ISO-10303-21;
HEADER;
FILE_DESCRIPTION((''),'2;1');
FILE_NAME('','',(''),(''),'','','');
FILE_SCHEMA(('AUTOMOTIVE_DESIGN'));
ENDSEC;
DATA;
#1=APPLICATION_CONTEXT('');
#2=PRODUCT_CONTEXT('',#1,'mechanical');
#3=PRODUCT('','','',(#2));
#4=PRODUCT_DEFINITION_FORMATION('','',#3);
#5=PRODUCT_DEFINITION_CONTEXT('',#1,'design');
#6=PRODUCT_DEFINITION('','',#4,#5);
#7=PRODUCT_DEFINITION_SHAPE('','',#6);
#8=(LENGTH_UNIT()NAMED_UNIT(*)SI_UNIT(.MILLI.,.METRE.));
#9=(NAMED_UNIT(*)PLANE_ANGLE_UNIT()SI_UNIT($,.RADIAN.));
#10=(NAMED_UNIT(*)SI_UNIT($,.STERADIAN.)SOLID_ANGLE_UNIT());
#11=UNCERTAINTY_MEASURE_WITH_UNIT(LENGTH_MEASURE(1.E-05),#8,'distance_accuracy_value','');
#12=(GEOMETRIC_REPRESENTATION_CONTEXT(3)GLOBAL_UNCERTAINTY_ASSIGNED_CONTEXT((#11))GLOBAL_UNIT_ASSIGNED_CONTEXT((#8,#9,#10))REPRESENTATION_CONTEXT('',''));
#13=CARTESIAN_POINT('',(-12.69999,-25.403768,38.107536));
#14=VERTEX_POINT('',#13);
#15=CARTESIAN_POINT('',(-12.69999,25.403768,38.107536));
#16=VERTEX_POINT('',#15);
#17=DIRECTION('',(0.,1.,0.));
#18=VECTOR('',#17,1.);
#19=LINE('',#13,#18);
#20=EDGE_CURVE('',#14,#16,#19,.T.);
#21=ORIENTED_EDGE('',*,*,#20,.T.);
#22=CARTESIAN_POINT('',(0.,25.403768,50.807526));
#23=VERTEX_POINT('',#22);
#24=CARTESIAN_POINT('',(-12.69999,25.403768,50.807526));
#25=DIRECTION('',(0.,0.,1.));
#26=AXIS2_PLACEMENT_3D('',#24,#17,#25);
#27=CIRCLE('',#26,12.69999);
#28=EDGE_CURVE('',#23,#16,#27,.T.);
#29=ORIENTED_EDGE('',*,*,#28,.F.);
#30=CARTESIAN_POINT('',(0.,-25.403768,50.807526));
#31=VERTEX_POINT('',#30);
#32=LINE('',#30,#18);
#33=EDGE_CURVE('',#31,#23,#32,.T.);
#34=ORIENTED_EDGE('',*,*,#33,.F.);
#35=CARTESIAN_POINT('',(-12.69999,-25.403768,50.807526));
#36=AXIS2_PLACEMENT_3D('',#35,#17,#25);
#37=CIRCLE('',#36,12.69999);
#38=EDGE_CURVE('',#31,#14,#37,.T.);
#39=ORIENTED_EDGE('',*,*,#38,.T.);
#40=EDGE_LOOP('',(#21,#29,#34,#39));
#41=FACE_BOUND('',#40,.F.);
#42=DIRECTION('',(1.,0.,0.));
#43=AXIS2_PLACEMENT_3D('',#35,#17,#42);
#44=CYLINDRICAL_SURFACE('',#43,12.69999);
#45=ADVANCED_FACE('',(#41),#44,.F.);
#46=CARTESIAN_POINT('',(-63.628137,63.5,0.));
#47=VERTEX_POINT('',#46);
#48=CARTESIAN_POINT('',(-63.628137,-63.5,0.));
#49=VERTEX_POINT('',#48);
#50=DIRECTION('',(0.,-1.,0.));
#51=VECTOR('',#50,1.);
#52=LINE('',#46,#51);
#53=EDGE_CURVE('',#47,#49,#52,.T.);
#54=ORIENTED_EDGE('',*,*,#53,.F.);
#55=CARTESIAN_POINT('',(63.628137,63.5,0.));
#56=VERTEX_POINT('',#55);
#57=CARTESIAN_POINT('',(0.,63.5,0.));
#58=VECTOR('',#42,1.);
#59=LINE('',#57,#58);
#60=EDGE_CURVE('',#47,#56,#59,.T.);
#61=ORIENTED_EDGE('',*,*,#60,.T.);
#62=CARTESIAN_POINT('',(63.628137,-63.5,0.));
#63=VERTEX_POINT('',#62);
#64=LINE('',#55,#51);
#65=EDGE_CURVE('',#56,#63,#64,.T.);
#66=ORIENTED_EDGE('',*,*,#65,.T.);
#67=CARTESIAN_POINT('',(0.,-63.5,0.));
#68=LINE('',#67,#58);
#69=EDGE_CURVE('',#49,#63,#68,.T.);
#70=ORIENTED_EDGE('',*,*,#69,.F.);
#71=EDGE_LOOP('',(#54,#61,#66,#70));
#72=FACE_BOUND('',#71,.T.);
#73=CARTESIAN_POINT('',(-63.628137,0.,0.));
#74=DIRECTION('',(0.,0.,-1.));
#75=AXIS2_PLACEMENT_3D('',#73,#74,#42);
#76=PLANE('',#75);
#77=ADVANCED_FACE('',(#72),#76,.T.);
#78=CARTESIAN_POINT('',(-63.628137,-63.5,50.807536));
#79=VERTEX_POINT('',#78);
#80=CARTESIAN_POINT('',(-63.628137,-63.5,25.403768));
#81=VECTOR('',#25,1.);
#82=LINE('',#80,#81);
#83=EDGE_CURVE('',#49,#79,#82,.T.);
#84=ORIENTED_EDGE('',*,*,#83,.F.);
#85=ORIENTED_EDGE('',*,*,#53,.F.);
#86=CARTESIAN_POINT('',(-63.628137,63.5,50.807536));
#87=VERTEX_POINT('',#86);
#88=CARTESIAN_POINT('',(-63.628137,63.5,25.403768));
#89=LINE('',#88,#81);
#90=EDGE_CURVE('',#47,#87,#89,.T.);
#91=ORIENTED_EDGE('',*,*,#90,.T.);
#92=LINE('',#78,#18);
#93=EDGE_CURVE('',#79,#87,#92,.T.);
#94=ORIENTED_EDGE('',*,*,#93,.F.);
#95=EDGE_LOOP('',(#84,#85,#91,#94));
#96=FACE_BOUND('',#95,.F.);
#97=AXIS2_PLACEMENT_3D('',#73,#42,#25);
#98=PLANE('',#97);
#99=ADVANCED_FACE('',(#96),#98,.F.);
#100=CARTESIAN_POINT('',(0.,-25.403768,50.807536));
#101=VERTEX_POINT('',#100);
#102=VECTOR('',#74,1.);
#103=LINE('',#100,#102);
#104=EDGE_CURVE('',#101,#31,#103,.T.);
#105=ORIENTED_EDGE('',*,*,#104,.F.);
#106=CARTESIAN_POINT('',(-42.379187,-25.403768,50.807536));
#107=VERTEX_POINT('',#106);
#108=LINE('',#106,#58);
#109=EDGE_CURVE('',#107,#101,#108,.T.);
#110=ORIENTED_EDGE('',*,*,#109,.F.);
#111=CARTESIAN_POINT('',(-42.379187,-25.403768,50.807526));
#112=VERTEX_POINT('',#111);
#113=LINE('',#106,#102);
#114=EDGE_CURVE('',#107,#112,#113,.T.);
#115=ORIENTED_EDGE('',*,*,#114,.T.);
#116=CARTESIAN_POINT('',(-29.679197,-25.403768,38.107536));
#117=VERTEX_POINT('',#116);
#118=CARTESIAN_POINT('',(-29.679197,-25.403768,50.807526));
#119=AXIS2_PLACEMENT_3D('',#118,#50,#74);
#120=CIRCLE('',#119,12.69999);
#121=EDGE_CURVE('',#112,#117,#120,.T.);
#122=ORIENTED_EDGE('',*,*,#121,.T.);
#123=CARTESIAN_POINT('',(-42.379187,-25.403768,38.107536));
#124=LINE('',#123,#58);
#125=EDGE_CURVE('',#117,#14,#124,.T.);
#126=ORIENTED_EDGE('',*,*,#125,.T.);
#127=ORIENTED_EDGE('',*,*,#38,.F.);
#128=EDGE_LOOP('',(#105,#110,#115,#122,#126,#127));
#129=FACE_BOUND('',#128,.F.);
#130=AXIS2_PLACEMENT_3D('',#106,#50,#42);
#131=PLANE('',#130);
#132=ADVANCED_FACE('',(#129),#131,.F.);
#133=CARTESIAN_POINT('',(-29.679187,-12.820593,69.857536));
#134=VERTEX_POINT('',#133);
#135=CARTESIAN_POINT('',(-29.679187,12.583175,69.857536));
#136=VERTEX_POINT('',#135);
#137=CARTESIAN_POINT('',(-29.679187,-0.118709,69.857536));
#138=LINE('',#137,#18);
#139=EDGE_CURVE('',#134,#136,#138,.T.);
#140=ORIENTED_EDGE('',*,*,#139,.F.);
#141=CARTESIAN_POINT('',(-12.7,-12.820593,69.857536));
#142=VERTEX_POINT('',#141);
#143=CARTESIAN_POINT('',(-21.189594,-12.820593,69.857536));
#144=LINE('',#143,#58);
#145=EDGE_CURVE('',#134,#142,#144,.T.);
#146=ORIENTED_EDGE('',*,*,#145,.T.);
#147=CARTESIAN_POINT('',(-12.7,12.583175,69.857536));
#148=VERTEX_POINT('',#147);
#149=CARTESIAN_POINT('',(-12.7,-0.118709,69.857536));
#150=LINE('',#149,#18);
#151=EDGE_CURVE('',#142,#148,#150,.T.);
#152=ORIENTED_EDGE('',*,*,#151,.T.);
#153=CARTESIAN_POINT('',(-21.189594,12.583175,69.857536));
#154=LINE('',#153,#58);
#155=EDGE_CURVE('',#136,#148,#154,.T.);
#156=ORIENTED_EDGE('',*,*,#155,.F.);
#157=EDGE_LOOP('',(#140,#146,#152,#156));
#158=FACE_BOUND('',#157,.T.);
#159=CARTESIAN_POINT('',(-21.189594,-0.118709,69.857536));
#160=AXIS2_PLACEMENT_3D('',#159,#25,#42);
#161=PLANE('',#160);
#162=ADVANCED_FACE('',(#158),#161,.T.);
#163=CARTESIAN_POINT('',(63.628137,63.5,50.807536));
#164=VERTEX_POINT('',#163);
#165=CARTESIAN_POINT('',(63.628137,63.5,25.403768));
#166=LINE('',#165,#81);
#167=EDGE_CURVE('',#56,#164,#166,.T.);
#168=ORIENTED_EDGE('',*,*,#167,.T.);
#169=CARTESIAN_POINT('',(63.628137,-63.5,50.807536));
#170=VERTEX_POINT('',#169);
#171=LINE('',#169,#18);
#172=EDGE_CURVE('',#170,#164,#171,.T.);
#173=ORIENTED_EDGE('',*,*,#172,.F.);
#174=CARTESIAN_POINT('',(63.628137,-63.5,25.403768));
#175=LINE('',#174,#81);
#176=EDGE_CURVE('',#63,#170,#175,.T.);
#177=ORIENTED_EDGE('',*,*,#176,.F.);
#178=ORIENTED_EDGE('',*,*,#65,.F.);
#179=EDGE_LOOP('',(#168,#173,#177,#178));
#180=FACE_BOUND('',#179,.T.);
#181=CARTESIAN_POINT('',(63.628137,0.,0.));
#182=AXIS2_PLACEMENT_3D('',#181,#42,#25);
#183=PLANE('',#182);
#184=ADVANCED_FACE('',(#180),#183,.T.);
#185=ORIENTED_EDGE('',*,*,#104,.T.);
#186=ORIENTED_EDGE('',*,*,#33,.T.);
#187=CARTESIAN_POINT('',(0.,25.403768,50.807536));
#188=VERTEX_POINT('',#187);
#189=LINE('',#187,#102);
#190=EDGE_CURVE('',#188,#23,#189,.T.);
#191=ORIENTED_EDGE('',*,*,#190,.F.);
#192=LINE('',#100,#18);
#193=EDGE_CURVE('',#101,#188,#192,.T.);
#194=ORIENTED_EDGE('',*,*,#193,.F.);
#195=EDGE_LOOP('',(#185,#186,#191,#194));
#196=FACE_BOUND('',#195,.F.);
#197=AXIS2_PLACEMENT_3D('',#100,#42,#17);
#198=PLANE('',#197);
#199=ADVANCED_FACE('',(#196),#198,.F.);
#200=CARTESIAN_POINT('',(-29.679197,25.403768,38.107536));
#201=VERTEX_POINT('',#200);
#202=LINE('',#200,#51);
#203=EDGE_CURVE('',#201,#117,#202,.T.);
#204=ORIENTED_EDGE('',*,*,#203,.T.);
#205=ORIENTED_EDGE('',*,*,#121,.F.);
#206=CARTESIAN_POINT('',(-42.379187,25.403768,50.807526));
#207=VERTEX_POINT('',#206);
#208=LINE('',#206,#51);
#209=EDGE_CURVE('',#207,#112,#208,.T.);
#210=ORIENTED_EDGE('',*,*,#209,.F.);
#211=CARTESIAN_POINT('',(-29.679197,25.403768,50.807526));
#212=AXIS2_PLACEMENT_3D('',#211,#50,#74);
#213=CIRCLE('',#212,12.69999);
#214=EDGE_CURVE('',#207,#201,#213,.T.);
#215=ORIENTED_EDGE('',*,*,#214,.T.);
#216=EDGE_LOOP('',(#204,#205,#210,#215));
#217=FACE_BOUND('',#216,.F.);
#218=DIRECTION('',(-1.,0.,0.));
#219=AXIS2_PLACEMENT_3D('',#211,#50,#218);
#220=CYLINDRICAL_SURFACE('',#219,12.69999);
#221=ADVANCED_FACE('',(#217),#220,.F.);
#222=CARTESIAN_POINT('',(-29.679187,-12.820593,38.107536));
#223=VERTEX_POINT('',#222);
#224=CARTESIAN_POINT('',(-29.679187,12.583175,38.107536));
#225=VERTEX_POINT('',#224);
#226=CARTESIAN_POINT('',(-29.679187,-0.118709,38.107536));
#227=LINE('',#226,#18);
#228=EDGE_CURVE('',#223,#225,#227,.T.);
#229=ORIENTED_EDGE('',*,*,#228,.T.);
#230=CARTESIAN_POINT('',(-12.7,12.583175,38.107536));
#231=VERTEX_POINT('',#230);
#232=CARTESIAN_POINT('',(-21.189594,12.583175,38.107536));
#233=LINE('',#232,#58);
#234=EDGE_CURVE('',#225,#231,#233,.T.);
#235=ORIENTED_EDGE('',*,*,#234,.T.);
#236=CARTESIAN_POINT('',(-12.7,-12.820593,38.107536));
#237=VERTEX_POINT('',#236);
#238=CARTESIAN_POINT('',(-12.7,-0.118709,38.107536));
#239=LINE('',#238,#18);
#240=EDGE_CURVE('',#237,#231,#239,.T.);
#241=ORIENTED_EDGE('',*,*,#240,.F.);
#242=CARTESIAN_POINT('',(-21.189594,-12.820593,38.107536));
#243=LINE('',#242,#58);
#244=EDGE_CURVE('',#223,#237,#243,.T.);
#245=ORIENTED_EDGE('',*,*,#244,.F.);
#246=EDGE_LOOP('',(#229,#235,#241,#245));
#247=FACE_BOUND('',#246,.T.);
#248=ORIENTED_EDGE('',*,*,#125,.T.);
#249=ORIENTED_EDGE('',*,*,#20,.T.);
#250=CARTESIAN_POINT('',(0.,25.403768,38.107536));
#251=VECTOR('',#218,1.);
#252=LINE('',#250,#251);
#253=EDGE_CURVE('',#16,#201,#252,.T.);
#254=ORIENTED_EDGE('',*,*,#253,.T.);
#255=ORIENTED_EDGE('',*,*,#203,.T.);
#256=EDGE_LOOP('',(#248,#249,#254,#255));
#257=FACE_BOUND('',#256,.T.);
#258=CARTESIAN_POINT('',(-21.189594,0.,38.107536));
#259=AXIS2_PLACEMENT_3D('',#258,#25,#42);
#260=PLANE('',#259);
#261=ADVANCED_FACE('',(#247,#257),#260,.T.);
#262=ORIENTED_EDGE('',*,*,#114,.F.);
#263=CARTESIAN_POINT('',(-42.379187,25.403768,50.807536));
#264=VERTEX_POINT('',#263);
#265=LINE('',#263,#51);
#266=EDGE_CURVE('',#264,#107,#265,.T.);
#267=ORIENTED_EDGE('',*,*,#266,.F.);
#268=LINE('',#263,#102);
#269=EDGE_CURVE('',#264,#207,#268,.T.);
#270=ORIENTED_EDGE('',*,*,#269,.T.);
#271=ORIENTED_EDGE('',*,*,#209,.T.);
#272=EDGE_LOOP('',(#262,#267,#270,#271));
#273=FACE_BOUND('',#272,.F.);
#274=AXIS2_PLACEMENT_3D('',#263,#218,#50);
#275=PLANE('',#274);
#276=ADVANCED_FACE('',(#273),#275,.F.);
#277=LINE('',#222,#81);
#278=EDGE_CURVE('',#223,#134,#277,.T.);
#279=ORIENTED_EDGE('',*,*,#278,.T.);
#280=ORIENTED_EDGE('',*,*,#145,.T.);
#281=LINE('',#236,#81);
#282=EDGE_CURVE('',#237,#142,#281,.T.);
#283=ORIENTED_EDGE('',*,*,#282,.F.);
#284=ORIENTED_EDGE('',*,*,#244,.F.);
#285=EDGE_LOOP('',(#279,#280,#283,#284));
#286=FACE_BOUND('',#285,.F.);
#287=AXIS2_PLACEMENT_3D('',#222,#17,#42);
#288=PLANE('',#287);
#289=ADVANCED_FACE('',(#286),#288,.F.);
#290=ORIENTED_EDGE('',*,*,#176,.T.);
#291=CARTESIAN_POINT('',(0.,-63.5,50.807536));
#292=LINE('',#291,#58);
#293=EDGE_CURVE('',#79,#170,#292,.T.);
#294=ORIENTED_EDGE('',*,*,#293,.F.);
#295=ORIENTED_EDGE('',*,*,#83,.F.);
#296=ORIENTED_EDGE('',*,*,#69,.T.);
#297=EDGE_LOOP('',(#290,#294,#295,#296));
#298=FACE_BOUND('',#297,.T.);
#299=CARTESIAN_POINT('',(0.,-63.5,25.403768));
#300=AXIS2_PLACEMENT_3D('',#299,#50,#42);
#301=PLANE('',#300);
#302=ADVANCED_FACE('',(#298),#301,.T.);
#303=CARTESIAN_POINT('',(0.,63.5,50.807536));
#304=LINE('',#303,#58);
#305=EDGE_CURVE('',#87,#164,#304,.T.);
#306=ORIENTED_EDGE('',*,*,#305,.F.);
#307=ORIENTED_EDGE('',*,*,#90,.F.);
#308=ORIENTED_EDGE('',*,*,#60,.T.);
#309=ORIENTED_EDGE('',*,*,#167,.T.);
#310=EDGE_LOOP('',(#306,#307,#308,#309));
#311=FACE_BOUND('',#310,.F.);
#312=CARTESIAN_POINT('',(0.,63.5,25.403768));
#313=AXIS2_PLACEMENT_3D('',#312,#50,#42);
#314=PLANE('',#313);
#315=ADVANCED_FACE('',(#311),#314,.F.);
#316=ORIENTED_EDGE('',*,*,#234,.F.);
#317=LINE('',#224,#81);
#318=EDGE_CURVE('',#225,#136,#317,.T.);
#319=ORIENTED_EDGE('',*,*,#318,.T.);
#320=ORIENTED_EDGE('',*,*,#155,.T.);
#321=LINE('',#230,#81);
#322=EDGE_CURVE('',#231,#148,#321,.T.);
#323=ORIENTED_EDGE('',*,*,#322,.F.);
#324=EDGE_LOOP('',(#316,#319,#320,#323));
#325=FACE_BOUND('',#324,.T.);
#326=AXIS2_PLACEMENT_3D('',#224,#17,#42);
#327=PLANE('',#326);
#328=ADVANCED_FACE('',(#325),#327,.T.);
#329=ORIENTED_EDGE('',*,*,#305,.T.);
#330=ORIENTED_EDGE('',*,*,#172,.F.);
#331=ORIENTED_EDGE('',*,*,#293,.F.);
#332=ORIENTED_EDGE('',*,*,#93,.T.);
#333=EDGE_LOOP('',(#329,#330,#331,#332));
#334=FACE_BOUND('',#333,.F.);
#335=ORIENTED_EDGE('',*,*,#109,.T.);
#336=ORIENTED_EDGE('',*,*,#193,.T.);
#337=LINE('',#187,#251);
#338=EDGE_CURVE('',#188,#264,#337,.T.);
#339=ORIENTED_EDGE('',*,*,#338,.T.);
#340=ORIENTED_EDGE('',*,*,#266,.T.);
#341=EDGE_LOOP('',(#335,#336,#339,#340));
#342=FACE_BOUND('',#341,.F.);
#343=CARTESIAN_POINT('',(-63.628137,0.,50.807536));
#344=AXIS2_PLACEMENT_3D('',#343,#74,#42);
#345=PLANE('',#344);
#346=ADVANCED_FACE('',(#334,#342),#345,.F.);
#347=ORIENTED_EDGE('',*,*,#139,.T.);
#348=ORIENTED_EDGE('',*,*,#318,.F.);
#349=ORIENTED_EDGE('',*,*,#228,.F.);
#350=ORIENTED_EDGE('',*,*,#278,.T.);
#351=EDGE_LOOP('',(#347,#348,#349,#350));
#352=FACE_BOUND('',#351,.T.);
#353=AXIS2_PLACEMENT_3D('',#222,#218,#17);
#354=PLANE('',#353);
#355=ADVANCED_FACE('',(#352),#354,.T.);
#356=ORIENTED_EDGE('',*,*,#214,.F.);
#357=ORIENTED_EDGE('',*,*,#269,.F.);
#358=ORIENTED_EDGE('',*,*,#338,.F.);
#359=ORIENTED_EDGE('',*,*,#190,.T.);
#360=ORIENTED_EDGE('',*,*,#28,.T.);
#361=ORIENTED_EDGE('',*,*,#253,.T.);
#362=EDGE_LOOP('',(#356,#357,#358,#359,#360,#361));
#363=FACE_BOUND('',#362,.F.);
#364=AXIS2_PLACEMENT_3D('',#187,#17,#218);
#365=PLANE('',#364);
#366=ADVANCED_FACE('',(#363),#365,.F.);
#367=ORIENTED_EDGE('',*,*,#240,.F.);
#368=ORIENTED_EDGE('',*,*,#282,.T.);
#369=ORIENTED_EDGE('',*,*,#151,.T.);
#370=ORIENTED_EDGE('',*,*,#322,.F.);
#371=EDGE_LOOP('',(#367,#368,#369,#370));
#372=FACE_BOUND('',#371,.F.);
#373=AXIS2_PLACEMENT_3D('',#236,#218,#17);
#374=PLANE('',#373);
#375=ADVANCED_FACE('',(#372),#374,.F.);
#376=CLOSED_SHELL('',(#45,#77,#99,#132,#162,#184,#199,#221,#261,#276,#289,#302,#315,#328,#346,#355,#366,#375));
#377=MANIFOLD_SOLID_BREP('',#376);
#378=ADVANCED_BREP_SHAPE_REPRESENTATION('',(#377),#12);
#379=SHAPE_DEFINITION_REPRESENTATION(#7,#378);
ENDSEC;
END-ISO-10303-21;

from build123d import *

# Parameters (mm, degrees)
F0_W          = 127.2562742233
F0_H          = 50.8075356483
F1_DEPTH      = 63.5
F1_DEPTH_BACK = 63.5
F3_DEPTH      = 12.7
F4_R          = 12.69999
F5_W          = 16.97918742
F5_H          = 25.4037678242
F6_DEPTH      = 31.75


# Not quite as in the source:
# - a fillet or chamfer is up to 0.001 mm smaller than in the source, because OpenCascade refuses the exact size


with BuildPart() as f1:
    # F0 (on Front) → F1 (new body, two sides)
    with BuildSketch(Plane.XZ) as f1_sk:
        with Locations((0, 25.4037678242)):
            Rectangle(F0_W, F0_H)
    extrude(amount=F1_DEPTH)
    extrude(f1_sk.sketch, amount=-F1_DEPTH_BACK)

    # F2 (on face) → F3 (cut)
    with BuildSketch(Plane.XY.offset(50.8075356483)):
        Polygon((0, -25.4037678242), (0, 0), (0, 25.4037678242), (-42.37918742, 25.4037678242), (-42.37918742, 0), (-42.37918742, -25.4037678242), align=None)
    extrude(amount=-F3_DEPTH, mode=Mode.SUBTRACT)

    # F4 (radius 12.7 in the source; OpenCascade refuses exactly that, so slightly less here)
    f4_edges = [f1.edges().sort_by_distance(p)[0] for p in [
        (-42.379187, 0, 38.107536),
        (0, 0, 38.107536),
    ]]
    fillet(f4_edges, radius=F4_R)

    # F5 (on face) → F6 (join)
    with BuildSketch(Plane.XY.offset(38.1075356483)):
        with Locations((-21.18959371, -0.1187091693)):
            Rectangle(F5_W, F5_H)
    extrude(amount=F6_DEPTH)


solid = f1.part
